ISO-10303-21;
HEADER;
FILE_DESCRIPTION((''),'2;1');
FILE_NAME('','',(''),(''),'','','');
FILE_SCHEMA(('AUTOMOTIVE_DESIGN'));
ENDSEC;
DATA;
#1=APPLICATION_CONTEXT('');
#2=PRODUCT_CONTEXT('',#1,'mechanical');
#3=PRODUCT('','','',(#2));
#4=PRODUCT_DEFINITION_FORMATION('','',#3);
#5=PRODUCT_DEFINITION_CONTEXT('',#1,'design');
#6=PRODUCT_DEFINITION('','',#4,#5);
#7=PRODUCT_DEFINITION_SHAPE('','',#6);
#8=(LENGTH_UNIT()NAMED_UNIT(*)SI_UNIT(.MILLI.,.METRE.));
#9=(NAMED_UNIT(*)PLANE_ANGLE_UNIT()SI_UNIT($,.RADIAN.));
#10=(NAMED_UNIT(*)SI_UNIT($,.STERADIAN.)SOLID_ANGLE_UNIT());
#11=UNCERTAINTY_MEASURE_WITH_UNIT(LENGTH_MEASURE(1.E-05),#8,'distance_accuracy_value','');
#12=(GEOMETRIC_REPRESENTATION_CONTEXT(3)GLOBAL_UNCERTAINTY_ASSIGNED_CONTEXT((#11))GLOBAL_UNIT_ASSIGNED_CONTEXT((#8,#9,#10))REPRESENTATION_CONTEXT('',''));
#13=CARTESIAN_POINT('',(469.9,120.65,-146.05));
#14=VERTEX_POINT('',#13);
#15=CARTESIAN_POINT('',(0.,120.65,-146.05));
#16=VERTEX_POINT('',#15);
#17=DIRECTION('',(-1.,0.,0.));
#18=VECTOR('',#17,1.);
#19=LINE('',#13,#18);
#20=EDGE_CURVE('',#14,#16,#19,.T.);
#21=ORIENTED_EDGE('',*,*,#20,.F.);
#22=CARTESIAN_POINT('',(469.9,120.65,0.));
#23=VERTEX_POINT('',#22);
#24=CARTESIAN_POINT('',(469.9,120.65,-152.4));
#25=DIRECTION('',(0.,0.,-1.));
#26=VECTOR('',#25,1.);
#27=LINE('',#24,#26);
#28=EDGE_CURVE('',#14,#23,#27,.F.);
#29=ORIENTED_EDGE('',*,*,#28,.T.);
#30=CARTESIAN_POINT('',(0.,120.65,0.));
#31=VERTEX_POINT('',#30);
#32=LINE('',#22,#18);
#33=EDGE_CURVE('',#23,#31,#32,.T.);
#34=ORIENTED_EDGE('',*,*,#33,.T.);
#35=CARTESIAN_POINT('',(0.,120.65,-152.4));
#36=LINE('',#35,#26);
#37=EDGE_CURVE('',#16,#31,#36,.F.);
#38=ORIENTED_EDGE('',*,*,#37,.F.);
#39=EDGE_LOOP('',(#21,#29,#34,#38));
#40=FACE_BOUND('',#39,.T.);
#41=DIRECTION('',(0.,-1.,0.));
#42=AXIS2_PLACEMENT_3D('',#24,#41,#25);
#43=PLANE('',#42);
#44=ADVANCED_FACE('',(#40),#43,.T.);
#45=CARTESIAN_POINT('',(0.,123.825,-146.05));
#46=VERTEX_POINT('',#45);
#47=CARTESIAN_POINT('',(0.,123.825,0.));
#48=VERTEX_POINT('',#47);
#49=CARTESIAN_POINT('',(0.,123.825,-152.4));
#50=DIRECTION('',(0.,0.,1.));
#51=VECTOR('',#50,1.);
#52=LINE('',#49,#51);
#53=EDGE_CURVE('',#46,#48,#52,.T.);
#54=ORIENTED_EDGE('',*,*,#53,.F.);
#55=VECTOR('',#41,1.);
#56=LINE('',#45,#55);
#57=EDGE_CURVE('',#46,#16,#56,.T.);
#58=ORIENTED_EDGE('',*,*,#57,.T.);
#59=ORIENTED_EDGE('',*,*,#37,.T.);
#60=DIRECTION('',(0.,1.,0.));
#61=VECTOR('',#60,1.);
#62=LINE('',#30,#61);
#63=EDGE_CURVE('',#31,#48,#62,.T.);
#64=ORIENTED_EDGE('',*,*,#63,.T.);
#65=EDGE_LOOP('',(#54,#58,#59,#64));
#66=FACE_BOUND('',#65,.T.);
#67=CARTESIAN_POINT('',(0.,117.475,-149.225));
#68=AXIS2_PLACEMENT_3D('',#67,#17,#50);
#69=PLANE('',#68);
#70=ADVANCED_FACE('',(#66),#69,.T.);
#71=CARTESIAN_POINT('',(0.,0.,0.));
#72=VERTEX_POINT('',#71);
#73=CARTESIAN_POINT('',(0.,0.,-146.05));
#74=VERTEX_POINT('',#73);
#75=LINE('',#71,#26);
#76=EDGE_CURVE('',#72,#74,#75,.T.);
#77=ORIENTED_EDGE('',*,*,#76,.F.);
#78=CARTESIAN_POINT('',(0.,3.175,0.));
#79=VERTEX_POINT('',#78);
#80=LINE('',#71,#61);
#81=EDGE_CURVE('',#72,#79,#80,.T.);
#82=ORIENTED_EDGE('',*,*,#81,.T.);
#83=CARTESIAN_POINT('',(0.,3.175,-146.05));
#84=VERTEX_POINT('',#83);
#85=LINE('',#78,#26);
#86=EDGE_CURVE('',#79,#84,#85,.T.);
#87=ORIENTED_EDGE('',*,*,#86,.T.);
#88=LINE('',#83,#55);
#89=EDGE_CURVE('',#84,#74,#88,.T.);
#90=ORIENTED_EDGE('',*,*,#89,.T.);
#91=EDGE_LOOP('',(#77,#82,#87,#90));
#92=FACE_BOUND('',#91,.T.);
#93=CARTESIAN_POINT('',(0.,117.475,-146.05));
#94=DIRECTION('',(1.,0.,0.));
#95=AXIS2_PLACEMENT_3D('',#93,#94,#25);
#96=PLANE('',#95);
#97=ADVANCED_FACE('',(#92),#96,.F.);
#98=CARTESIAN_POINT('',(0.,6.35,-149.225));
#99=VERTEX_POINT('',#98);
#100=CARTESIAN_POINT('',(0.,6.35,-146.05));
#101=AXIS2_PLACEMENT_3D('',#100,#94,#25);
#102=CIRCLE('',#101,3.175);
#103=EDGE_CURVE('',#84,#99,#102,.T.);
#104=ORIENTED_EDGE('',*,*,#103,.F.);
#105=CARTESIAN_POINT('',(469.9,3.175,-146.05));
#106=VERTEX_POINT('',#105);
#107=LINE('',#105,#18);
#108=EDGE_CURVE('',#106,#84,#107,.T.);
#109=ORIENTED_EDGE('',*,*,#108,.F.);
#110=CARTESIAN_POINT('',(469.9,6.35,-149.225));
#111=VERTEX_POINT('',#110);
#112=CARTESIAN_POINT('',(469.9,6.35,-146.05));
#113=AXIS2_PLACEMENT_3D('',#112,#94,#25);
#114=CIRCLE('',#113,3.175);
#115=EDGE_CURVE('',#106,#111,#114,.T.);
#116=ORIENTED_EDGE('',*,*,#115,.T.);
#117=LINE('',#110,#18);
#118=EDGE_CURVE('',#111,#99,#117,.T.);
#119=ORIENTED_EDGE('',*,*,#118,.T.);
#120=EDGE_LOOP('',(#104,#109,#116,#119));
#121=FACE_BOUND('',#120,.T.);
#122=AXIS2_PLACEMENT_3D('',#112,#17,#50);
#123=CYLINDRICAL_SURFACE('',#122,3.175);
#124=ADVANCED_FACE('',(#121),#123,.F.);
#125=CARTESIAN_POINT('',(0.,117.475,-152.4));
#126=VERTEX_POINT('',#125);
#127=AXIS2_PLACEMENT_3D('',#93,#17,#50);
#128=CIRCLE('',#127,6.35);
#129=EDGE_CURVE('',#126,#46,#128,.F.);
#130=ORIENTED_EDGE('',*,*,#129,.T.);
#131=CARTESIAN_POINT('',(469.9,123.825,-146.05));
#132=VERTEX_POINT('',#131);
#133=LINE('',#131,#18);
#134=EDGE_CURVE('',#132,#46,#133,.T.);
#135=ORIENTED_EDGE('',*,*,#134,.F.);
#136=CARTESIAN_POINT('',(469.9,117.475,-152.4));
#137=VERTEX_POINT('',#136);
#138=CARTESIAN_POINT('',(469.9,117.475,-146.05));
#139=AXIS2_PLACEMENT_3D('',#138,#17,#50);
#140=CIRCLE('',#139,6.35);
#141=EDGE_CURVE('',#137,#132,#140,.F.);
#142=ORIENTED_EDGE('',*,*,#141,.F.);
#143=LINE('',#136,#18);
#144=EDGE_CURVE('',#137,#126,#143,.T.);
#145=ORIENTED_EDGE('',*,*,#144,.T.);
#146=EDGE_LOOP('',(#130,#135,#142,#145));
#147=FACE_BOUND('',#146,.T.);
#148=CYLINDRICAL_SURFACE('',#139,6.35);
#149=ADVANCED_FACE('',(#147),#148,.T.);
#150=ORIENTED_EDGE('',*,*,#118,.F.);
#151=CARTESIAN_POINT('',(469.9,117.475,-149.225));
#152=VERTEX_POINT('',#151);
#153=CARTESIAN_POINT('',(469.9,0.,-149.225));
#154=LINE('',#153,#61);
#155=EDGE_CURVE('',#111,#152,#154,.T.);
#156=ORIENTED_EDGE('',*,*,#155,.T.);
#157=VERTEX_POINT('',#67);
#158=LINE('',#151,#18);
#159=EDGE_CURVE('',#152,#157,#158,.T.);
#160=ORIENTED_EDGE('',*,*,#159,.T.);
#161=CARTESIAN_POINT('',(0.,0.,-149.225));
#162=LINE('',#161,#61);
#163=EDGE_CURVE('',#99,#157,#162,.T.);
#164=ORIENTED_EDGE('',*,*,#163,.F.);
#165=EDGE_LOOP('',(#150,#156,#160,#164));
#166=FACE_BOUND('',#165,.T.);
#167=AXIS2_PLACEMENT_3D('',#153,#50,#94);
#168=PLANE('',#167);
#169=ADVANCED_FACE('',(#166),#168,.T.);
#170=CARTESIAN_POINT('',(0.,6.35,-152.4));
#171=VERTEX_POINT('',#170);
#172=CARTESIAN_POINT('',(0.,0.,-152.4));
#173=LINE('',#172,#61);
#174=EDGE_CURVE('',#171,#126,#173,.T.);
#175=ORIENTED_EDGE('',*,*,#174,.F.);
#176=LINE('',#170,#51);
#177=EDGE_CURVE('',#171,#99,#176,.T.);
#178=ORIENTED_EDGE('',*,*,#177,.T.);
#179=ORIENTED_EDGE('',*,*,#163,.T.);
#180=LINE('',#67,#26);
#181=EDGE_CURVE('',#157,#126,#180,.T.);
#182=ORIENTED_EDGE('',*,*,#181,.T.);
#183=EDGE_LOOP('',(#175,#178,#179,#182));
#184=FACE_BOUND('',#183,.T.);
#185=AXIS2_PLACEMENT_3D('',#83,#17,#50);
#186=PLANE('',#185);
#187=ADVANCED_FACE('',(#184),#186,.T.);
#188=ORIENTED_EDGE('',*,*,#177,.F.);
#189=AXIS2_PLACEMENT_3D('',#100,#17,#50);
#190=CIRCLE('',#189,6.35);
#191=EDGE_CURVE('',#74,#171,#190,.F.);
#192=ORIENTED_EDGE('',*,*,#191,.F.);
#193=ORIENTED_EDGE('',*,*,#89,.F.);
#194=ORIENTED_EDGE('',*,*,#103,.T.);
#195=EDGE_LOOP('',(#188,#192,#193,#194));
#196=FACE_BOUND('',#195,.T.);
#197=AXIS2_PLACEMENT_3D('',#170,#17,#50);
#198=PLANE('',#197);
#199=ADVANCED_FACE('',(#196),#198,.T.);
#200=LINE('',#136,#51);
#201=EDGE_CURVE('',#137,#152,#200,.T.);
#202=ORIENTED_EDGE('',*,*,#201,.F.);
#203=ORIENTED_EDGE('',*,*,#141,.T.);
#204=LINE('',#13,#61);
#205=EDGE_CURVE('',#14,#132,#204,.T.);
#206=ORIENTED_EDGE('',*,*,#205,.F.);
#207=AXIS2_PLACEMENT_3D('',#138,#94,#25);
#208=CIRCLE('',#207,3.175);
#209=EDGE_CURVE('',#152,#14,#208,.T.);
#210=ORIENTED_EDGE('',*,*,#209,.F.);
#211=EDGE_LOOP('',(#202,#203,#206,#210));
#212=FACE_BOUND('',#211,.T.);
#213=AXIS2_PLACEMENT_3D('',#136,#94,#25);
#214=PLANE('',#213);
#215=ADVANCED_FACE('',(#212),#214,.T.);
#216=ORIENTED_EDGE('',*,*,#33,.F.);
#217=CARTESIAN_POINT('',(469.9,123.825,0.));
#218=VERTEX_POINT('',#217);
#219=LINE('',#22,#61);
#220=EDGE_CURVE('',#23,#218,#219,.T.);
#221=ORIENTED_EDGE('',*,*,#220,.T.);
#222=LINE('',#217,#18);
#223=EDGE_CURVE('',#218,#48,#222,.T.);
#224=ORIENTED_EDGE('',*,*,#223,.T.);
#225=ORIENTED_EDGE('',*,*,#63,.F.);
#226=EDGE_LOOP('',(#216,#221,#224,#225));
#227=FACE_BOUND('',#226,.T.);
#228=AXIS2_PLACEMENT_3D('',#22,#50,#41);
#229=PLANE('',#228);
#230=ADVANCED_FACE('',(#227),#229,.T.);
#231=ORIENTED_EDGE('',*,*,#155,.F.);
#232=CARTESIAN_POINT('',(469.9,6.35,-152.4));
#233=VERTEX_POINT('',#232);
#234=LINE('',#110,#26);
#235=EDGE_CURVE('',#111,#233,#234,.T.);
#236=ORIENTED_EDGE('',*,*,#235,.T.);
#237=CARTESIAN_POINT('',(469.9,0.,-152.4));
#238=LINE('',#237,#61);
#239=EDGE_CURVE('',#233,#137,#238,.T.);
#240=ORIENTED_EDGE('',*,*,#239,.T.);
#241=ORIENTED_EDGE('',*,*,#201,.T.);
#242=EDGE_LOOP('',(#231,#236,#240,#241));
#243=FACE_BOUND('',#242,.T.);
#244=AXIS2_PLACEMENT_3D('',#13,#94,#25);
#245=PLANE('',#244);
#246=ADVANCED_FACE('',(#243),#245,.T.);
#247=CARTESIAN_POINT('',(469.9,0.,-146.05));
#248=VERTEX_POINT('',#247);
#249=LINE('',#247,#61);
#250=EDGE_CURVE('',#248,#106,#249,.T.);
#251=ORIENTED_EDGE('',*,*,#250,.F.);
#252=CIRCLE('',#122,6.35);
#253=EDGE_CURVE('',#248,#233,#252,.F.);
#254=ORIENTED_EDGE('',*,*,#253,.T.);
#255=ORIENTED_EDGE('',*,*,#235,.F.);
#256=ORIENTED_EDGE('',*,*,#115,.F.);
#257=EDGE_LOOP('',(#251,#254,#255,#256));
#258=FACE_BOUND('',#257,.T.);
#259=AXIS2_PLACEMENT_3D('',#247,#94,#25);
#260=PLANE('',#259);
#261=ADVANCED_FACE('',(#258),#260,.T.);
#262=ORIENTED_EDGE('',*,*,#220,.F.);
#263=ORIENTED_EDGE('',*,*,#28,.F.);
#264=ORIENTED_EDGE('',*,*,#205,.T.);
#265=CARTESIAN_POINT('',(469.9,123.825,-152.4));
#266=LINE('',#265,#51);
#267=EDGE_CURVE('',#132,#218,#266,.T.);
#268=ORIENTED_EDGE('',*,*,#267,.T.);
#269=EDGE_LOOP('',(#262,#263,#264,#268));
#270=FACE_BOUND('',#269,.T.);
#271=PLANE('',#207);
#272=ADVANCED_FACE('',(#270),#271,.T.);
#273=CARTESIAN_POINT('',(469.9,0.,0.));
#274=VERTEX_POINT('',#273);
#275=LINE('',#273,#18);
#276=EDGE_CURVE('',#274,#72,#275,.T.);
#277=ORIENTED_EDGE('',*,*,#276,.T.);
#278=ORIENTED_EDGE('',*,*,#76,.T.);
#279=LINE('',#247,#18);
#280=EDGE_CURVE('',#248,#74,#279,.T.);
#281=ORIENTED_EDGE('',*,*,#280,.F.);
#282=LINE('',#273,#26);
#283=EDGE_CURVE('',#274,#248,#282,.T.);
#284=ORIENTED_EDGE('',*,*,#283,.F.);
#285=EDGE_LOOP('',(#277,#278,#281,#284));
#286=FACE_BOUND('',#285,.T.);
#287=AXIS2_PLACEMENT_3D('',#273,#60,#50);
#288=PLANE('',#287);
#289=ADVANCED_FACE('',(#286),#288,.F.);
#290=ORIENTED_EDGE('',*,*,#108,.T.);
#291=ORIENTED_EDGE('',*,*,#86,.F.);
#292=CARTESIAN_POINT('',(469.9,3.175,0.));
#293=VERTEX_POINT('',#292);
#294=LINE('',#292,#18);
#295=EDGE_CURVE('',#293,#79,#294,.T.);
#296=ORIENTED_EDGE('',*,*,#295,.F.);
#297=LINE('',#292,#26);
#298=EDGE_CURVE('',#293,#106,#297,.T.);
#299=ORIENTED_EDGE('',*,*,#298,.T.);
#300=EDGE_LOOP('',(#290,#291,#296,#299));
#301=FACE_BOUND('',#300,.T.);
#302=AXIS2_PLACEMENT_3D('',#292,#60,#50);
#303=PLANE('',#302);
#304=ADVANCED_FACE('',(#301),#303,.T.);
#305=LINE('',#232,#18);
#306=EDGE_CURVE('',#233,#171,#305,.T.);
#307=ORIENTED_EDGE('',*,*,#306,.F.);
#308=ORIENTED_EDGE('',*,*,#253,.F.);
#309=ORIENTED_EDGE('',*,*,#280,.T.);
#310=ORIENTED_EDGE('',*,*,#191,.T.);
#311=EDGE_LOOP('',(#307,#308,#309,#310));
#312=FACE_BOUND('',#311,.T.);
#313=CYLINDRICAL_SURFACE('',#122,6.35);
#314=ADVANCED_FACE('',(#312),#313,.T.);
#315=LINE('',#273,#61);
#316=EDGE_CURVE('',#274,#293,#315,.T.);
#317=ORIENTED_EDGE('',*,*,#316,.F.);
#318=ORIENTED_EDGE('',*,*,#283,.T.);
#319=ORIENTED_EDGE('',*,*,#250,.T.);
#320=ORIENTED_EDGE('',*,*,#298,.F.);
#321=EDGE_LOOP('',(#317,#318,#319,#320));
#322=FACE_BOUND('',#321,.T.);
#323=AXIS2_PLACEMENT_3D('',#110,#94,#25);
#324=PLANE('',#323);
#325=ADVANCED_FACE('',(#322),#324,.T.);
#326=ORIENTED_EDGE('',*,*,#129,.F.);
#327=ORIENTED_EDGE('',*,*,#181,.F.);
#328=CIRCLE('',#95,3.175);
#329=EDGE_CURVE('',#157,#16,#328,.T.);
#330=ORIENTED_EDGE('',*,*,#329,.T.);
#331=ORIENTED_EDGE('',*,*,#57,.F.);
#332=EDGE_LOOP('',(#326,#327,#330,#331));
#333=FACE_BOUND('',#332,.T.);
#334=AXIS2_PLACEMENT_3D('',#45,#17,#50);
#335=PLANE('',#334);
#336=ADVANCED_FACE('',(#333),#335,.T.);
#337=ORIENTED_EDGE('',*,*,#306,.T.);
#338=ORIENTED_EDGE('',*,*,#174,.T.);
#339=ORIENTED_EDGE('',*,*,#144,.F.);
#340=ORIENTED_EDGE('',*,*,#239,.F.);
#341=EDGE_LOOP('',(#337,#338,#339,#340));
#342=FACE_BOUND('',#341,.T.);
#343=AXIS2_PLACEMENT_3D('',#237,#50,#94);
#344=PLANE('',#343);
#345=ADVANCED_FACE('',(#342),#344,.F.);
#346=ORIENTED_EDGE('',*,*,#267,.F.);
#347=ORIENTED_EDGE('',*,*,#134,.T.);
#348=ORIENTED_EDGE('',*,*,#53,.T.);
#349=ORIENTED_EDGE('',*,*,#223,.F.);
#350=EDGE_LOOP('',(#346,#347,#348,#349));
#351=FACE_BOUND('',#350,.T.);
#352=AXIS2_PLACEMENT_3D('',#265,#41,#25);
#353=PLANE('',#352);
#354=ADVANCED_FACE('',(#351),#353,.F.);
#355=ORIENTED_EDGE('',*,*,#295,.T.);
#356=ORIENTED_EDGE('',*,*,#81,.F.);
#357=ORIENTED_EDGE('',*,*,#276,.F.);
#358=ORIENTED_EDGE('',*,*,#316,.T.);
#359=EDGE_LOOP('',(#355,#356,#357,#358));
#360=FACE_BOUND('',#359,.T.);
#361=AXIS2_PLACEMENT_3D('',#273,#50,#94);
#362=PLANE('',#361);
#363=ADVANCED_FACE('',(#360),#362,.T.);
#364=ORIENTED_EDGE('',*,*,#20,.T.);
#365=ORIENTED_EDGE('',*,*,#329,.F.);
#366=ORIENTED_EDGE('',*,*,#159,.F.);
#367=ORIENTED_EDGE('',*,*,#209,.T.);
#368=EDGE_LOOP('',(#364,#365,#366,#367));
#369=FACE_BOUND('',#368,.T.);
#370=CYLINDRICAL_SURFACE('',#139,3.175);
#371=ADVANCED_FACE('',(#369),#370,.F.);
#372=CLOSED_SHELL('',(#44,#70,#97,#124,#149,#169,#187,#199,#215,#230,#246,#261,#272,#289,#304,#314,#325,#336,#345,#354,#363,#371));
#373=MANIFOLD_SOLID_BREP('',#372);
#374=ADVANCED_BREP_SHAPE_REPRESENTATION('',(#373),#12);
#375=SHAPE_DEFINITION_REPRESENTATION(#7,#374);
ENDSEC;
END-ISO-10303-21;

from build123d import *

# Parameters (mm, degrees)
BASE_FLANGE1_DEPTH = 469.9


# Sheet-metal steps are written as plain solids
with BuildPart() as part:
    # Sketch1 → Base-Flange1 (new body)
    with BuildSketch(Plane(origin=(0, 0, 0), x_dir=(0, 0, -1), z_dir=(1, 0, 0))):
        with BuildLine():
            Line((0, 0), (146.05, 0))
            ThreePointArc((146.05, 0), (150.540128061, 1.859871939), (152.4, 6.35))
            Line((152.4, 6.35), (152.4, 117.475))
            ThreePointArc((152.4, 117.475), (150.540128061, 121.965128061), (146.05, 123.825))
            Line((146.05, 123.825), (0, 123.825))
            Line((0, 123.825), (0, 120.65))
            Line((0, 120.65), (146.05, 120.65))
            ThreePointArc((146.05, 120.65), (148.29506403, 119.72006403), (149.225, 117.475))
            Line((149.225, 117.475), (149.225, 6.35))
            ThreePointArc((149.225, 6.35), (148.29506403, 4.10493597), (146.05, 3.175))
            Line((146.05, 3.175), (0, 3.175))
            Line((0, 3.175), (0, 0))
        make_face()
    extrude(amount=BASE_FLANGE1_DEPTH)


solid = part.part
